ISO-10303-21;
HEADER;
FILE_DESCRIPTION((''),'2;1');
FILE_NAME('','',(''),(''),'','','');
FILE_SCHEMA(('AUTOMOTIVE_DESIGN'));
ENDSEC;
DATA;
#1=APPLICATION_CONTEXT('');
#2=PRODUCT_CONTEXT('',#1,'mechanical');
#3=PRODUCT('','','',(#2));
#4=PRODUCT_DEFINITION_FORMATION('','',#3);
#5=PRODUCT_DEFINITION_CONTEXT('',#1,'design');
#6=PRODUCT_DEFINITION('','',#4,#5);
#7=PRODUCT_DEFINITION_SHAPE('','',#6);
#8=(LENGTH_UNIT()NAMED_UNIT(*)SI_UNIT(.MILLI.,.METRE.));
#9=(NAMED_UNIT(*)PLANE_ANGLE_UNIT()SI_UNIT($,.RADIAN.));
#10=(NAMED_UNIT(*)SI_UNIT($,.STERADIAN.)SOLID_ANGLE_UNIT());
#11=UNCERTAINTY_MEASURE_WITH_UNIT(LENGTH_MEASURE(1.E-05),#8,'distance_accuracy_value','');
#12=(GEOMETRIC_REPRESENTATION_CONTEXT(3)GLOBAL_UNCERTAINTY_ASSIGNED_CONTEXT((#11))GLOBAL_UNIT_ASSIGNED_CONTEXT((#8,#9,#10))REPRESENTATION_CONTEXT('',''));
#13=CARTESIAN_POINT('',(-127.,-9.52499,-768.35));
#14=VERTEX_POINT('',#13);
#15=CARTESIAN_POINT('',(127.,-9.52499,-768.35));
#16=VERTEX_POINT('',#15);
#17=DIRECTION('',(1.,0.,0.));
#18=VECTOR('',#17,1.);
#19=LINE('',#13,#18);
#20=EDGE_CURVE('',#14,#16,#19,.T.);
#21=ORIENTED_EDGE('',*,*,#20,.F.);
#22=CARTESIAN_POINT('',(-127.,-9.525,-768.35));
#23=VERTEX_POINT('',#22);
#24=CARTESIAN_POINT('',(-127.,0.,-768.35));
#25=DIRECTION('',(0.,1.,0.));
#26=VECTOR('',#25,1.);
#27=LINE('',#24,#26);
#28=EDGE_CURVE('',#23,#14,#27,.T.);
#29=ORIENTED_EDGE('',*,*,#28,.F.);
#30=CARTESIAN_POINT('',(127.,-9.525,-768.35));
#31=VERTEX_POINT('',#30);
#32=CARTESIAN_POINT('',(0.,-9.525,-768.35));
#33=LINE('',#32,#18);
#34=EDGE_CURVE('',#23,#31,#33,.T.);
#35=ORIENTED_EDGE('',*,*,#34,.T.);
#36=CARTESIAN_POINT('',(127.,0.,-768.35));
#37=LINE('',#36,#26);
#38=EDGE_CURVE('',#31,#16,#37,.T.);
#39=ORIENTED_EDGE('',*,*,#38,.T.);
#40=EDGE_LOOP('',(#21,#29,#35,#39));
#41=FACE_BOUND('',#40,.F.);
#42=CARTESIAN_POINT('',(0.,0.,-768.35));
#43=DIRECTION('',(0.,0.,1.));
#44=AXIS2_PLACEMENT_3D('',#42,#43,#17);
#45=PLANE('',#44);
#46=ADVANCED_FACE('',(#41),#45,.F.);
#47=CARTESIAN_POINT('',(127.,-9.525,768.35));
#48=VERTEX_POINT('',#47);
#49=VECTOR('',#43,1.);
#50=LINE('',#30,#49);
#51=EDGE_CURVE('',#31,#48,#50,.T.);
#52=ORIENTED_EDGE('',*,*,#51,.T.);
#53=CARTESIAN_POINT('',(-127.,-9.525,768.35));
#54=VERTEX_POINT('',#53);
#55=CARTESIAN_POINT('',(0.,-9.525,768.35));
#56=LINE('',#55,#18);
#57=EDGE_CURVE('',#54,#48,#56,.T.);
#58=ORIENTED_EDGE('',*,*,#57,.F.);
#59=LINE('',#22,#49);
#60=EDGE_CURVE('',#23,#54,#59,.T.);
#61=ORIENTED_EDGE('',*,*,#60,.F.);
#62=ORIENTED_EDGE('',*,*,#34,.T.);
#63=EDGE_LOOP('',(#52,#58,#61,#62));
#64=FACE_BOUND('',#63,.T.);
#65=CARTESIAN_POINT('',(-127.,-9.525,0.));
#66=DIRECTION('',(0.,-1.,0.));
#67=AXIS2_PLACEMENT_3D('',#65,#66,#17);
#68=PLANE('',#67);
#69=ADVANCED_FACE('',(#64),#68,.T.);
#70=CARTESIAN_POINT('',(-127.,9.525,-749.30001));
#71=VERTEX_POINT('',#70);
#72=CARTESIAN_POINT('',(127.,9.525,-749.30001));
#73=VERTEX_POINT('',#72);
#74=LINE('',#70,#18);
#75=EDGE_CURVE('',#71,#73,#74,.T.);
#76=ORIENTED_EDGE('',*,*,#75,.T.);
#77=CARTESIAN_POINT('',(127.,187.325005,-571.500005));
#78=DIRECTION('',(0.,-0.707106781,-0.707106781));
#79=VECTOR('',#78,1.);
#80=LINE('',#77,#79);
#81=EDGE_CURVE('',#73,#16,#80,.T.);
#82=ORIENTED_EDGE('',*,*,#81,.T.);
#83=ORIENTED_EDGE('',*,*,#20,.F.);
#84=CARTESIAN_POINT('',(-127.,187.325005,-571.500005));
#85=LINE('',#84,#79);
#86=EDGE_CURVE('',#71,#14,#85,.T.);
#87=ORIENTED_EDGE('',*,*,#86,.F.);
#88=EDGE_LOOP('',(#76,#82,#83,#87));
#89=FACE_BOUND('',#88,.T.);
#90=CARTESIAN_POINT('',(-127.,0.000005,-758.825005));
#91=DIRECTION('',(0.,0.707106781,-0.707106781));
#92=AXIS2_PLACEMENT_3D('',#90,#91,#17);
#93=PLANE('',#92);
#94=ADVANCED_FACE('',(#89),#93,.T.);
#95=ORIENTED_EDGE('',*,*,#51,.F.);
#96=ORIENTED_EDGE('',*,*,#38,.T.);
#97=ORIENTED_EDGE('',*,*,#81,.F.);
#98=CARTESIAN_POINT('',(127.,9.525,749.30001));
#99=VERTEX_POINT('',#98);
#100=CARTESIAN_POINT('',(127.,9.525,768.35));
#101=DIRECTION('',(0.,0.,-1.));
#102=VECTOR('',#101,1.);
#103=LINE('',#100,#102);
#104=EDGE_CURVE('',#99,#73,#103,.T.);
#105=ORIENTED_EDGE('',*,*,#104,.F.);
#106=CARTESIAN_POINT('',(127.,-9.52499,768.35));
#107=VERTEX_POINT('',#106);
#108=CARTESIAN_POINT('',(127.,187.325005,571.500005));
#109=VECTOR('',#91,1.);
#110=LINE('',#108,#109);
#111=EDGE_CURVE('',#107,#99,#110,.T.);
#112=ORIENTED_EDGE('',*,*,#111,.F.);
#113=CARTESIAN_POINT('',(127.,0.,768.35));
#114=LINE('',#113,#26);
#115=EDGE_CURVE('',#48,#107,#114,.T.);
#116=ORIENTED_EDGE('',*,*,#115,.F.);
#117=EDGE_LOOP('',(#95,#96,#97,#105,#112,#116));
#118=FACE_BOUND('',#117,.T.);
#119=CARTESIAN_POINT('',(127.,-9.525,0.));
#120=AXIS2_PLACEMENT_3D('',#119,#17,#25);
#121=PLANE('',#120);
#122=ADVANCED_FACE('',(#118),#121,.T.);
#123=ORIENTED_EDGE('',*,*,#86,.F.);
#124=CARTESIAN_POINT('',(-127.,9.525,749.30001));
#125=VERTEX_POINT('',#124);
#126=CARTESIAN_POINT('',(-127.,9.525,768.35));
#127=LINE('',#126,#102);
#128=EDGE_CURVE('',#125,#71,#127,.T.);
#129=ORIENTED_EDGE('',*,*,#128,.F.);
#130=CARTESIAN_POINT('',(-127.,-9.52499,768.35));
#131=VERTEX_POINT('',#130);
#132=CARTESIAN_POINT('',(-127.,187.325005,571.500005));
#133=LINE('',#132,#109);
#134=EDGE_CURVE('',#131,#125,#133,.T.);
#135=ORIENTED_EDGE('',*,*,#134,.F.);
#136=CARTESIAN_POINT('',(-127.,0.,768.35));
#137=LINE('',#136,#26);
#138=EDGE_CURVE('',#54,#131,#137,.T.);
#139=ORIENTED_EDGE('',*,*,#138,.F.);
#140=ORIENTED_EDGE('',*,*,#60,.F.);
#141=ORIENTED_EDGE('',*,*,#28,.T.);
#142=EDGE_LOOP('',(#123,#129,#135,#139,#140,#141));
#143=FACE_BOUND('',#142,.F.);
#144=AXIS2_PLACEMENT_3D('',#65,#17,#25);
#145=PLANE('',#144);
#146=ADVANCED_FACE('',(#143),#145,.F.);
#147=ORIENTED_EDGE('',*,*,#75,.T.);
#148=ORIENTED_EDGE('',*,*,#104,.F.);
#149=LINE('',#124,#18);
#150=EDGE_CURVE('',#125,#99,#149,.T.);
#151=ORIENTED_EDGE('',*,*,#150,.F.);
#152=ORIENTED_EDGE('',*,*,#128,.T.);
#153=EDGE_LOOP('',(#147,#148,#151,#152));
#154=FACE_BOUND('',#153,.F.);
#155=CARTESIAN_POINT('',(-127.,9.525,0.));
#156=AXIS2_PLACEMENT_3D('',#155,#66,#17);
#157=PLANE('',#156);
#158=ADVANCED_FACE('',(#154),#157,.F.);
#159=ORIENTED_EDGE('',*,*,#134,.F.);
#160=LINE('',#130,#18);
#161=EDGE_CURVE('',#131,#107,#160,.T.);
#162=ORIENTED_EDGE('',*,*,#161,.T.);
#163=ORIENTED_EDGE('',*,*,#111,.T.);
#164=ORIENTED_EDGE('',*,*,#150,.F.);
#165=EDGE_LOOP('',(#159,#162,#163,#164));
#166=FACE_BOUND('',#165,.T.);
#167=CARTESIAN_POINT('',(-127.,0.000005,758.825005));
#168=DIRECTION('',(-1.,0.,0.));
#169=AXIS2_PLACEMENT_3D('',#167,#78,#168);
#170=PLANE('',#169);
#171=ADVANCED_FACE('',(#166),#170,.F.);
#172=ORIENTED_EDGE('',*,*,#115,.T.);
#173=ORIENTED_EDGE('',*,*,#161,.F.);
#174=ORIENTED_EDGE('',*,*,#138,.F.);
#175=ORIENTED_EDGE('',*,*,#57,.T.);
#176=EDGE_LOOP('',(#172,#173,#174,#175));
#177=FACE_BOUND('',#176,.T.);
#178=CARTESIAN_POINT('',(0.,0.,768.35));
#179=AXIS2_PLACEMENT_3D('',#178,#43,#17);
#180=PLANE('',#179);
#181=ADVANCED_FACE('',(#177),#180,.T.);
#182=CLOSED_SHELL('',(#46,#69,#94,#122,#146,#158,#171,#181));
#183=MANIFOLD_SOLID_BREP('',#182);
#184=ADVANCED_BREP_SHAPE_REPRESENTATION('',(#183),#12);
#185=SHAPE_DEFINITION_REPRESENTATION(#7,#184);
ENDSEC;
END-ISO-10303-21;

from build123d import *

# Parameters (mm, degrees)
F0_W     = 254
F0_H     = 19.05
F1_DEPTH = 768.35
F2_SIZE2 = 19.04999
F2_SIZE  = 19.04999


# Not quite as in the source:
# - a fillet or chamfer is up to 0.001 mm smaller than in the source, because OpenCascade refuses the exact size


with BuildPart() as f1:
    # F0 (on Top) → F1 (new body, symmetric)
    with BuildSketch(Plane.XY):
        Rectangle(F0_W, F0_H)
    extrude(amount=F1_DEPTH, both=True)

    # F2 (size 19.05 and 19.05 in the source; OpenCascade refuses exactly that, so slightly less here)
    f2_edges = [f1.edges().sort_by_distance(p)[0] for p in [
        (0, 9.525, 768.35),
        (0, 9.525, -768.35),
    ]]
    chamfer(f2_edges, length=F2_SIZE, length2=F2_SIZE2)


solid = f1.part
